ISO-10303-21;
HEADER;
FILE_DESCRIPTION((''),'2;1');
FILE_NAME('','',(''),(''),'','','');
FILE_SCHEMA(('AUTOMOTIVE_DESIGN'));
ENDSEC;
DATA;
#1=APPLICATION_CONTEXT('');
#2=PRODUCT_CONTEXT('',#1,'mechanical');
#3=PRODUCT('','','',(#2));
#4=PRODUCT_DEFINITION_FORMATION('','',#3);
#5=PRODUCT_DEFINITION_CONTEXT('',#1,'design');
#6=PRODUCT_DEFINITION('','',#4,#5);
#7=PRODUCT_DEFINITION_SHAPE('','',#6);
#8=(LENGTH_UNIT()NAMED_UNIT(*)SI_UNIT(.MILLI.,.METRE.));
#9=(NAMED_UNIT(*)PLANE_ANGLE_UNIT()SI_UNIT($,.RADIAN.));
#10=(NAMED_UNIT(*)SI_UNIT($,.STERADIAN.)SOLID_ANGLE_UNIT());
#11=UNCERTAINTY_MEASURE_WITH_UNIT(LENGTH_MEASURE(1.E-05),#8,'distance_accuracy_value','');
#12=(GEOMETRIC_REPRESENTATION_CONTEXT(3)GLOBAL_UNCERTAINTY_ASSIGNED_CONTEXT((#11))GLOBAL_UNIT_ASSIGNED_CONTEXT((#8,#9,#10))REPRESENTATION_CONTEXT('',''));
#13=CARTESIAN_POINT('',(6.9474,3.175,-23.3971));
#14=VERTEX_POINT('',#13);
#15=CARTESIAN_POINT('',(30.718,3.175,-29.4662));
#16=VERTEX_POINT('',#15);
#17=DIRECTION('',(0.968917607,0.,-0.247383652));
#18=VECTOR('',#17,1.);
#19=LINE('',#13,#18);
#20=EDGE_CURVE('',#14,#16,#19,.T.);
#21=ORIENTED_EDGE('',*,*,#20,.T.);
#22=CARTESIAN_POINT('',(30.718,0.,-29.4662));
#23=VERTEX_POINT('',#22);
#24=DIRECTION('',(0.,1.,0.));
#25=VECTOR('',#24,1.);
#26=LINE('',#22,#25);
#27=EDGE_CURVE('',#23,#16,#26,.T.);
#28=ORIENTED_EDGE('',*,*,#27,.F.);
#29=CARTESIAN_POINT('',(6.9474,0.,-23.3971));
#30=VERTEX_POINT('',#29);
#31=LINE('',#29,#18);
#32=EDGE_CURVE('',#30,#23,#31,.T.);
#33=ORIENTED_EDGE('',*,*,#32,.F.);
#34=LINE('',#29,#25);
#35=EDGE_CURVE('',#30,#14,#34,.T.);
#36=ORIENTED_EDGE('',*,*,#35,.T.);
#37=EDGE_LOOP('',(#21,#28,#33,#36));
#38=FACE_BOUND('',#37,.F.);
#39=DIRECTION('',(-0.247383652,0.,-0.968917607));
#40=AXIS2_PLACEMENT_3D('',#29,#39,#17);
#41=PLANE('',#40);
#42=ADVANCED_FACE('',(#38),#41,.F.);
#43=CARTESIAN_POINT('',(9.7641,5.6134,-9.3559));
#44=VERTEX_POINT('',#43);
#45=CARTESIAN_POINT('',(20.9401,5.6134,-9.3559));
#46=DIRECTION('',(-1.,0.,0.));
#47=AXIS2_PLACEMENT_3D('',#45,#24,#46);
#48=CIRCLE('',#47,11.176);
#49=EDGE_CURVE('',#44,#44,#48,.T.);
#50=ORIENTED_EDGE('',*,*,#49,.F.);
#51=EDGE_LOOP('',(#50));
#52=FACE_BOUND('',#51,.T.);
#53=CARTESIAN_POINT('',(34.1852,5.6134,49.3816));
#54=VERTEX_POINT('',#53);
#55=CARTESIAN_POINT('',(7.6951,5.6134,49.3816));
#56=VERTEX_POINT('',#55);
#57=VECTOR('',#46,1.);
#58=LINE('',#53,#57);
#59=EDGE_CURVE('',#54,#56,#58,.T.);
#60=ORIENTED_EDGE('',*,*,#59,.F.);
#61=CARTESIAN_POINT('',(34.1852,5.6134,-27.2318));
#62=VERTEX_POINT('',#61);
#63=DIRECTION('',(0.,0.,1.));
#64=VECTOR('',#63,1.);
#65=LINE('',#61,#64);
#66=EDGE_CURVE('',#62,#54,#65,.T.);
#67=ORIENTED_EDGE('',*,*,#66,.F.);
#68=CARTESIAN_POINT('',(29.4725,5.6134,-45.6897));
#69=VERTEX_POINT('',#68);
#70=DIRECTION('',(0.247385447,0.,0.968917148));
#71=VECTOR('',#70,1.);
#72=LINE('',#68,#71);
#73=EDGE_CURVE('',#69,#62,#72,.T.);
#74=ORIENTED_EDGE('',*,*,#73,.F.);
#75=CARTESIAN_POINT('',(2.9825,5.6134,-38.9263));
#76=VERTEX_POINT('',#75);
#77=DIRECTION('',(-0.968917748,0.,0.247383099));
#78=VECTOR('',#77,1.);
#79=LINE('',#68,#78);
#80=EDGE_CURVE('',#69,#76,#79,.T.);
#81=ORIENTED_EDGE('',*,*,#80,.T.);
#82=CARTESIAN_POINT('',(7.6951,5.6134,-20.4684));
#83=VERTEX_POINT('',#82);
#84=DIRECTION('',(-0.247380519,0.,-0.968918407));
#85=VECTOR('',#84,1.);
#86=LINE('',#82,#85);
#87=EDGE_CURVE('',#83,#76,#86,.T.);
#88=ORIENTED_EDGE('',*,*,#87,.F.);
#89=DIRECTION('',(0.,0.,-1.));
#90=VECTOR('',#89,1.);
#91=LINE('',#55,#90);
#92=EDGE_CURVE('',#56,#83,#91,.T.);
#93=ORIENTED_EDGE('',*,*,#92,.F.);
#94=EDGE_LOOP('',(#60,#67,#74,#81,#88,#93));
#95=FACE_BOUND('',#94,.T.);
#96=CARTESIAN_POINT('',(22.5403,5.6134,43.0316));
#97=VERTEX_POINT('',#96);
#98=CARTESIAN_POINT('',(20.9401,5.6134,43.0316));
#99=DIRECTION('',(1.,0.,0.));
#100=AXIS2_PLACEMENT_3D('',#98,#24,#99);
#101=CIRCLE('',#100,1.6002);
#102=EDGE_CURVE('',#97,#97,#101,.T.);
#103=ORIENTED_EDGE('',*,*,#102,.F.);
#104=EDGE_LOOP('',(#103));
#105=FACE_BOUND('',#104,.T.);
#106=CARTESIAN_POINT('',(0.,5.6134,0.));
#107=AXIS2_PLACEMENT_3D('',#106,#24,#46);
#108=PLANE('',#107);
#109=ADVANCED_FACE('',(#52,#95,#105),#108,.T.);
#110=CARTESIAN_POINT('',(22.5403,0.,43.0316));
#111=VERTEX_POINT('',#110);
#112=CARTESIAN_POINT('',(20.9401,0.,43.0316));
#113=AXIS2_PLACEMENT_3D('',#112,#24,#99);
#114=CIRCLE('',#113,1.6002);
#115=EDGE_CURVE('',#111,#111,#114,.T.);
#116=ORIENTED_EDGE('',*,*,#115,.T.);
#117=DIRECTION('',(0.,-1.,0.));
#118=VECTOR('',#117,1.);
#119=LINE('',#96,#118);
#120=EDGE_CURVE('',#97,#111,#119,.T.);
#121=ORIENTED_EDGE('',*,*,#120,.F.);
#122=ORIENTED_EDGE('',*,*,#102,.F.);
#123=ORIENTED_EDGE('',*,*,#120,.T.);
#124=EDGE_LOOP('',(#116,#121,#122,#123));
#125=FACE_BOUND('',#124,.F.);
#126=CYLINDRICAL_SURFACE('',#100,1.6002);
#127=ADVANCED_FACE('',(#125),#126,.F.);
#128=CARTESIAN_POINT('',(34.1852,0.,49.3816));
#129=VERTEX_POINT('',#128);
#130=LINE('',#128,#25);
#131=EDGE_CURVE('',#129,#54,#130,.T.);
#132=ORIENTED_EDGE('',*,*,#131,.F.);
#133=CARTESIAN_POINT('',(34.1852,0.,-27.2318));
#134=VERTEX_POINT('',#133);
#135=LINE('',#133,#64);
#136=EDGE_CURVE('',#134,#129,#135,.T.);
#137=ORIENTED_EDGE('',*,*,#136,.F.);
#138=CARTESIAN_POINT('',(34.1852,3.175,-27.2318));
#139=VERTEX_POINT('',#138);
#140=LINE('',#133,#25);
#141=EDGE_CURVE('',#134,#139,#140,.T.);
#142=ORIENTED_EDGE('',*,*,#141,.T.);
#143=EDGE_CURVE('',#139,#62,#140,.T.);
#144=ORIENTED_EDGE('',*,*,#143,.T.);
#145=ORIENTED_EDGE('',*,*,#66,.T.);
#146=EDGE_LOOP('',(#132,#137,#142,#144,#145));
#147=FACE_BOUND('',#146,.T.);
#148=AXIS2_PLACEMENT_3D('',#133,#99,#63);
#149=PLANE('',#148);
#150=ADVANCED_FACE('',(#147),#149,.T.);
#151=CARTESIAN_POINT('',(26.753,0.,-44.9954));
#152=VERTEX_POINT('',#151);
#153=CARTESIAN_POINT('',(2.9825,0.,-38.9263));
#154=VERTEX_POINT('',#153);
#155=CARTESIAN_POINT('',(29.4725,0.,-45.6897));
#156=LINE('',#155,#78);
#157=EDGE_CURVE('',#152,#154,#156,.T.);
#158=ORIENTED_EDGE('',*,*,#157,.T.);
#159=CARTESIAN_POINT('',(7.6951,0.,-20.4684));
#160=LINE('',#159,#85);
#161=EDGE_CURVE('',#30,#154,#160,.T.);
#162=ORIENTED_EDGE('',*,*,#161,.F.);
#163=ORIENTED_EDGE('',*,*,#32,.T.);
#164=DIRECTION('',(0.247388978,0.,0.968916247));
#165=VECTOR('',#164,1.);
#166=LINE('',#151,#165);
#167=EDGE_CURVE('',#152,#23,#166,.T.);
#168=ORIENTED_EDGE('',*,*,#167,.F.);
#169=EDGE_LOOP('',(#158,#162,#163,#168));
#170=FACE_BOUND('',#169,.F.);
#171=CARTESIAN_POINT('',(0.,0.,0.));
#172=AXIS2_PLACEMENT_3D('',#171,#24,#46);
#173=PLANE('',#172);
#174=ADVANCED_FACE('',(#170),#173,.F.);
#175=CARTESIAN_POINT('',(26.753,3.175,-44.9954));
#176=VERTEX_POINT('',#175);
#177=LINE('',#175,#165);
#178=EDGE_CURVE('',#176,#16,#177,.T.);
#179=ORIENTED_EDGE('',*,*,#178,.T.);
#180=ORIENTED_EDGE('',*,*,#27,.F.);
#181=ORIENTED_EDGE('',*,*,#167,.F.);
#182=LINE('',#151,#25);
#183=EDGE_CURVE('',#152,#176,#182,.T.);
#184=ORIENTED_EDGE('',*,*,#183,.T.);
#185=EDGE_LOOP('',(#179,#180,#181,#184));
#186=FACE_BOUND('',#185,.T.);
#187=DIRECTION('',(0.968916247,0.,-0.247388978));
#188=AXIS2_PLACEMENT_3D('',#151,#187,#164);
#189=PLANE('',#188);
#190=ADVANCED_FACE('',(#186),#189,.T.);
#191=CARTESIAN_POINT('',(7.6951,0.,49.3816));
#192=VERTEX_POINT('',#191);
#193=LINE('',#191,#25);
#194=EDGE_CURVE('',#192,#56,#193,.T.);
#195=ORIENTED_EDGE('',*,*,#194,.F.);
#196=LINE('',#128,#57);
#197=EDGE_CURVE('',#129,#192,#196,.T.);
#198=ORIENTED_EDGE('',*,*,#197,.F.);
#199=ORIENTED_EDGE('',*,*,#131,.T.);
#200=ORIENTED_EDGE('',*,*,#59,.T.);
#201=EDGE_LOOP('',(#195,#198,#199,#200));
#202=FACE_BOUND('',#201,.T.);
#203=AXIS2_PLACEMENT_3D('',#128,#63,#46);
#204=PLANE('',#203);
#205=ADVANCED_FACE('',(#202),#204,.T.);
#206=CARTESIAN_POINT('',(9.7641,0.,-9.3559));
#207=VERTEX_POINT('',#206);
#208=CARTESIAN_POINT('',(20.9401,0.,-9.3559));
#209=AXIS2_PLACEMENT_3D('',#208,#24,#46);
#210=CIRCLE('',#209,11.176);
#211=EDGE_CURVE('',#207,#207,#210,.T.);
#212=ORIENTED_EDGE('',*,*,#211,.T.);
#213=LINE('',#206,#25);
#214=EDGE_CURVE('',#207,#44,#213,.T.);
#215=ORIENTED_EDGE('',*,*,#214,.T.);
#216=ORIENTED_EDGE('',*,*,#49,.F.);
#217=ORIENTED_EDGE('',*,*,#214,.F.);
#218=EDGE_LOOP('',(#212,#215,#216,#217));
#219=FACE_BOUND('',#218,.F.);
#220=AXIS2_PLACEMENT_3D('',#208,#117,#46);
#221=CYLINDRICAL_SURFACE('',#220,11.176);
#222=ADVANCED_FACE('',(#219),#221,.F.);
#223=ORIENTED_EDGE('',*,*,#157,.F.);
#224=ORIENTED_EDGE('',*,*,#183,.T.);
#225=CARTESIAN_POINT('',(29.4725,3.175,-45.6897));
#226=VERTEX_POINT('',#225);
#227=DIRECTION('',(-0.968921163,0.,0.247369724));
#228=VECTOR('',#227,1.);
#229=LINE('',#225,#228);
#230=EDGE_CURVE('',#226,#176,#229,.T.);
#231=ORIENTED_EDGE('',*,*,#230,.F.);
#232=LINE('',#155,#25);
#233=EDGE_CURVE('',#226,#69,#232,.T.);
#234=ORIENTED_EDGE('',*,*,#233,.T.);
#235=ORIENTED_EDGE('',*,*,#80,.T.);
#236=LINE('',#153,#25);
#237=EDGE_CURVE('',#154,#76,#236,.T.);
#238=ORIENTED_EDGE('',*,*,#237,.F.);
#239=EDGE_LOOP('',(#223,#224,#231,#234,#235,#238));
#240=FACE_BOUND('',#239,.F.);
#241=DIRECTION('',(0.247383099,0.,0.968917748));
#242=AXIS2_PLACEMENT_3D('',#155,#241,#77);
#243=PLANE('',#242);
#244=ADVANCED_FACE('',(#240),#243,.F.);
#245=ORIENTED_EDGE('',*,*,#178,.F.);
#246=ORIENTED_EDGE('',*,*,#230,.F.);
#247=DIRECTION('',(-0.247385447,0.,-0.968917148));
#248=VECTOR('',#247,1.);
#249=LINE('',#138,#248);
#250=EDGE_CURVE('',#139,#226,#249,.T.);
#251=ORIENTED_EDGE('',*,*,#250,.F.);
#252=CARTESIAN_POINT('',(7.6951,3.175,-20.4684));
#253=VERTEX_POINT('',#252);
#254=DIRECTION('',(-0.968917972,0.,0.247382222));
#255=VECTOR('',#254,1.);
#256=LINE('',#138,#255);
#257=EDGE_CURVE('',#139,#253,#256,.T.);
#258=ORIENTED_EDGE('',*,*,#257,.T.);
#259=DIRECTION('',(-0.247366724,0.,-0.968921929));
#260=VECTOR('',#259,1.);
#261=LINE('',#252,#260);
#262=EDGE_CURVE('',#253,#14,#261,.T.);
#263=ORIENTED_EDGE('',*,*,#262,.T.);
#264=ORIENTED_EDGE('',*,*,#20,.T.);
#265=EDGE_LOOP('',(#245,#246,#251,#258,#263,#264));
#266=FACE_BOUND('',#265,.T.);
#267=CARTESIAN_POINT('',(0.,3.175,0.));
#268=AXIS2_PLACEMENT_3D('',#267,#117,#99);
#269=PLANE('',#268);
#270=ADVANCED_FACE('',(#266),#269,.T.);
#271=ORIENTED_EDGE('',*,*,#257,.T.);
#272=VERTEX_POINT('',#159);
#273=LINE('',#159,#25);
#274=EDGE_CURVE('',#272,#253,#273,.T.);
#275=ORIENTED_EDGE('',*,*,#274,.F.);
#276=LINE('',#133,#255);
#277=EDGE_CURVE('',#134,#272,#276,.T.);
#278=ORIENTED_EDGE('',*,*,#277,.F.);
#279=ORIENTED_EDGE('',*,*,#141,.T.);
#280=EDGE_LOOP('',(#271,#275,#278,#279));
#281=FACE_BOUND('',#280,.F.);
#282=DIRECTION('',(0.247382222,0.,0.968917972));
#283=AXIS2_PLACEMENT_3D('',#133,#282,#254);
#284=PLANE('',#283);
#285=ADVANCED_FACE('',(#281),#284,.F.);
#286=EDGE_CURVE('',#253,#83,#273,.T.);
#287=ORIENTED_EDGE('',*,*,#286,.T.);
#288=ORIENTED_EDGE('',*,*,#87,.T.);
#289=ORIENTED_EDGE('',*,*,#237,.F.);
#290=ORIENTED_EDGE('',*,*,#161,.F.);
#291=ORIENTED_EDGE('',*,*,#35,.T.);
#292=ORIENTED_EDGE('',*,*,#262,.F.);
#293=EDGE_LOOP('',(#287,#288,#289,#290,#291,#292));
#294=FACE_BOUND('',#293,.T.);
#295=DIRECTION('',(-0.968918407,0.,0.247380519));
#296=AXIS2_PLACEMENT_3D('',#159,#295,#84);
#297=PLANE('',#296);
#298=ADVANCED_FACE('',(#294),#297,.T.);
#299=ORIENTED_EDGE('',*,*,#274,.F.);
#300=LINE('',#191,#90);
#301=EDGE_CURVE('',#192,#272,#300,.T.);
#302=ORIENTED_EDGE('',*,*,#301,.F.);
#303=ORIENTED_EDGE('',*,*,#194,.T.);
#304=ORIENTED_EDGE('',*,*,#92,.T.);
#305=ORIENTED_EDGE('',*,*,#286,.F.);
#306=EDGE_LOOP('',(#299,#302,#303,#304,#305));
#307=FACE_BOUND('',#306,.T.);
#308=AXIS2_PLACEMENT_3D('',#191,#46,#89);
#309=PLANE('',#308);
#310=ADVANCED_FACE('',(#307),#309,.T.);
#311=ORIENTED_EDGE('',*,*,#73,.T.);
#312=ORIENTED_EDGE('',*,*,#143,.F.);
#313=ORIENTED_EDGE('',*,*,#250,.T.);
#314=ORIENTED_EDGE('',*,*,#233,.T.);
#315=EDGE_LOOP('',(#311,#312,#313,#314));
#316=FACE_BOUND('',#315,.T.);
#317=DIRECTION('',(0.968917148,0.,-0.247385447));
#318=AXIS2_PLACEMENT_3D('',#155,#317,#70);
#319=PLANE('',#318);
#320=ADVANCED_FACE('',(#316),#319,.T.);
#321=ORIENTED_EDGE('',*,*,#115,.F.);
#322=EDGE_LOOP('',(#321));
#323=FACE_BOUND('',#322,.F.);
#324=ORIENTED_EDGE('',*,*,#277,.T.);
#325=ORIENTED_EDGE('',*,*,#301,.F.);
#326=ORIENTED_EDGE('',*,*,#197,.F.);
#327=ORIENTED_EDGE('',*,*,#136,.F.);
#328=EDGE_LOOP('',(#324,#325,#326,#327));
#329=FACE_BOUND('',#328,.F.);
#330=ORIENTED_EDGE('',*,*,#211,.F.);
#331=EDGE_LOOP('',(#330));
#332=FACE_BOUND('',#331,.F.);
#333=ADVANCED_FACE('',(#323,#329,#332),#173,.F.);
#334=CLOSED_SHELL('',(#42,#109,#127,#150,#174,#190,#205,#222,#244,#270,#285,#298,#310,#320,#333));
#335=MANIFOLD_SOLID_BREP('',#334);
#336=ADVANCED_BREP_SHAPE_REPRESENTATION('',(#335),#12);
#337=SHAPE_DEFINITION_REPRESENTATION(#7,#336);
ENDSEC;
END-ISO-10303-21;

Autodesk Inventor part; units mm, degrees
ref_plane "YZ Plane" through (0, 0, 0) normal (1, 0, 0) x (0, 1, 0)
ref_plane "XZ Plane" through (0, 0, 0) normal (0, 1, 0) x (-1, 0, 0)
ref_plane "XY Plane" through (0, 0, 0) normal (0, 0, 1) x (1, 0, 0)
sketch "Sketch1" plane through (0, 0, 0) normal (0, 1, 0) x (-1, 0, 0)
  line L0 (18.6455, 5.0782) -> (18.6456, 5.0782)
  line L1 (-29.4725, -45.6897) -> (-2.9825, -38.9263)
  circle A0 centre (-20.9401, -9.3559) radius 11.176
  line L2 (-7.6951, 49.3816) -> (-7.6951, -20.4684)
  line L3 (-7.6951, -20.4684) -> (-2.9825, -38.9263)
  line L4 (-2.9825, -38.9263) -> (-29.4725, -45.6897)
  line L5 (-29.4725, -45.6897) -> (-34.1852, -27.2318)
  line L6 (-34.1852, -27.2318) -> (-34.1852, 49.3816)
  line L7 (-34.1852, 49.3816) -> (-7.6951, 49.3816)
  dimension "d4" = 22.352
  dimension "d30" = 19.05
  dimension "d32" = 19.05
  dimension "d33" = 26.49
  dimension "d35" = 13.245
  dimension "d36" = 58.7375
  dimension "d37" = 69.85
  dimension "d42" = 75.677
extrude "Extrusion1" add sketch "Sketch1" along normal blind 5.6134
sketch "Sketch4" plane through (0, 5.6134, 0) normal (0, 1, 0) x (1, 0, 0)
  line L0 (7.6951, -49.3816) -> (34.1852, -49.3816) projected
  circle A0 centre (20.9401, -43.0316) radius 1.6002
  point P0 (0, 0)
  dimension "d38" = 3.2004
  dimension "d39" = 6.35
extrude "Extrusion4" cut sketch "Sketch4" against normal blind 25.4
sketch "Sketch5" plane through (0, 0, 0) normal (0, -1, 0) x (1, 0, 0)
  line L0 (29.4725, -45.6897) -> (34.1852, -27.2318) projected
  line L1 (34.1852, -27.2318) -> (7.6951, -20.4684)
  line L2 (7.6951, -20.4684) -> (6.9474, -23.3971)
  line L3 (6.9474, -23.3971) -> (30.718, -29.4662)
  line L4 (33.4374, -30.1605) -> (34.1852, -27.2318)
  line L5 (34.1852, 49.3816) -> (34.1852, -27.2318) projected
  line L6 (34.1852, -27.2318) -> (29.4725, -45.6897)
  line L7 (29.4725, -45.6897) -> (26.753, -44.9954)
  line L8 (26.753, -44.9954) -> (30.718, -29.4662)
  line L9 (7.6951, -20.4684) -> (34.1852, -27.2318)
  point P0 (0, 0)
  dimension "d46" = 3.0226
  dimension "d47" = 2.8067
extrude "Extrusion5" cut sketch "Sketch5" against normal blind 3.175
properties part number "Lidar Sensor CAse Piece 1"
